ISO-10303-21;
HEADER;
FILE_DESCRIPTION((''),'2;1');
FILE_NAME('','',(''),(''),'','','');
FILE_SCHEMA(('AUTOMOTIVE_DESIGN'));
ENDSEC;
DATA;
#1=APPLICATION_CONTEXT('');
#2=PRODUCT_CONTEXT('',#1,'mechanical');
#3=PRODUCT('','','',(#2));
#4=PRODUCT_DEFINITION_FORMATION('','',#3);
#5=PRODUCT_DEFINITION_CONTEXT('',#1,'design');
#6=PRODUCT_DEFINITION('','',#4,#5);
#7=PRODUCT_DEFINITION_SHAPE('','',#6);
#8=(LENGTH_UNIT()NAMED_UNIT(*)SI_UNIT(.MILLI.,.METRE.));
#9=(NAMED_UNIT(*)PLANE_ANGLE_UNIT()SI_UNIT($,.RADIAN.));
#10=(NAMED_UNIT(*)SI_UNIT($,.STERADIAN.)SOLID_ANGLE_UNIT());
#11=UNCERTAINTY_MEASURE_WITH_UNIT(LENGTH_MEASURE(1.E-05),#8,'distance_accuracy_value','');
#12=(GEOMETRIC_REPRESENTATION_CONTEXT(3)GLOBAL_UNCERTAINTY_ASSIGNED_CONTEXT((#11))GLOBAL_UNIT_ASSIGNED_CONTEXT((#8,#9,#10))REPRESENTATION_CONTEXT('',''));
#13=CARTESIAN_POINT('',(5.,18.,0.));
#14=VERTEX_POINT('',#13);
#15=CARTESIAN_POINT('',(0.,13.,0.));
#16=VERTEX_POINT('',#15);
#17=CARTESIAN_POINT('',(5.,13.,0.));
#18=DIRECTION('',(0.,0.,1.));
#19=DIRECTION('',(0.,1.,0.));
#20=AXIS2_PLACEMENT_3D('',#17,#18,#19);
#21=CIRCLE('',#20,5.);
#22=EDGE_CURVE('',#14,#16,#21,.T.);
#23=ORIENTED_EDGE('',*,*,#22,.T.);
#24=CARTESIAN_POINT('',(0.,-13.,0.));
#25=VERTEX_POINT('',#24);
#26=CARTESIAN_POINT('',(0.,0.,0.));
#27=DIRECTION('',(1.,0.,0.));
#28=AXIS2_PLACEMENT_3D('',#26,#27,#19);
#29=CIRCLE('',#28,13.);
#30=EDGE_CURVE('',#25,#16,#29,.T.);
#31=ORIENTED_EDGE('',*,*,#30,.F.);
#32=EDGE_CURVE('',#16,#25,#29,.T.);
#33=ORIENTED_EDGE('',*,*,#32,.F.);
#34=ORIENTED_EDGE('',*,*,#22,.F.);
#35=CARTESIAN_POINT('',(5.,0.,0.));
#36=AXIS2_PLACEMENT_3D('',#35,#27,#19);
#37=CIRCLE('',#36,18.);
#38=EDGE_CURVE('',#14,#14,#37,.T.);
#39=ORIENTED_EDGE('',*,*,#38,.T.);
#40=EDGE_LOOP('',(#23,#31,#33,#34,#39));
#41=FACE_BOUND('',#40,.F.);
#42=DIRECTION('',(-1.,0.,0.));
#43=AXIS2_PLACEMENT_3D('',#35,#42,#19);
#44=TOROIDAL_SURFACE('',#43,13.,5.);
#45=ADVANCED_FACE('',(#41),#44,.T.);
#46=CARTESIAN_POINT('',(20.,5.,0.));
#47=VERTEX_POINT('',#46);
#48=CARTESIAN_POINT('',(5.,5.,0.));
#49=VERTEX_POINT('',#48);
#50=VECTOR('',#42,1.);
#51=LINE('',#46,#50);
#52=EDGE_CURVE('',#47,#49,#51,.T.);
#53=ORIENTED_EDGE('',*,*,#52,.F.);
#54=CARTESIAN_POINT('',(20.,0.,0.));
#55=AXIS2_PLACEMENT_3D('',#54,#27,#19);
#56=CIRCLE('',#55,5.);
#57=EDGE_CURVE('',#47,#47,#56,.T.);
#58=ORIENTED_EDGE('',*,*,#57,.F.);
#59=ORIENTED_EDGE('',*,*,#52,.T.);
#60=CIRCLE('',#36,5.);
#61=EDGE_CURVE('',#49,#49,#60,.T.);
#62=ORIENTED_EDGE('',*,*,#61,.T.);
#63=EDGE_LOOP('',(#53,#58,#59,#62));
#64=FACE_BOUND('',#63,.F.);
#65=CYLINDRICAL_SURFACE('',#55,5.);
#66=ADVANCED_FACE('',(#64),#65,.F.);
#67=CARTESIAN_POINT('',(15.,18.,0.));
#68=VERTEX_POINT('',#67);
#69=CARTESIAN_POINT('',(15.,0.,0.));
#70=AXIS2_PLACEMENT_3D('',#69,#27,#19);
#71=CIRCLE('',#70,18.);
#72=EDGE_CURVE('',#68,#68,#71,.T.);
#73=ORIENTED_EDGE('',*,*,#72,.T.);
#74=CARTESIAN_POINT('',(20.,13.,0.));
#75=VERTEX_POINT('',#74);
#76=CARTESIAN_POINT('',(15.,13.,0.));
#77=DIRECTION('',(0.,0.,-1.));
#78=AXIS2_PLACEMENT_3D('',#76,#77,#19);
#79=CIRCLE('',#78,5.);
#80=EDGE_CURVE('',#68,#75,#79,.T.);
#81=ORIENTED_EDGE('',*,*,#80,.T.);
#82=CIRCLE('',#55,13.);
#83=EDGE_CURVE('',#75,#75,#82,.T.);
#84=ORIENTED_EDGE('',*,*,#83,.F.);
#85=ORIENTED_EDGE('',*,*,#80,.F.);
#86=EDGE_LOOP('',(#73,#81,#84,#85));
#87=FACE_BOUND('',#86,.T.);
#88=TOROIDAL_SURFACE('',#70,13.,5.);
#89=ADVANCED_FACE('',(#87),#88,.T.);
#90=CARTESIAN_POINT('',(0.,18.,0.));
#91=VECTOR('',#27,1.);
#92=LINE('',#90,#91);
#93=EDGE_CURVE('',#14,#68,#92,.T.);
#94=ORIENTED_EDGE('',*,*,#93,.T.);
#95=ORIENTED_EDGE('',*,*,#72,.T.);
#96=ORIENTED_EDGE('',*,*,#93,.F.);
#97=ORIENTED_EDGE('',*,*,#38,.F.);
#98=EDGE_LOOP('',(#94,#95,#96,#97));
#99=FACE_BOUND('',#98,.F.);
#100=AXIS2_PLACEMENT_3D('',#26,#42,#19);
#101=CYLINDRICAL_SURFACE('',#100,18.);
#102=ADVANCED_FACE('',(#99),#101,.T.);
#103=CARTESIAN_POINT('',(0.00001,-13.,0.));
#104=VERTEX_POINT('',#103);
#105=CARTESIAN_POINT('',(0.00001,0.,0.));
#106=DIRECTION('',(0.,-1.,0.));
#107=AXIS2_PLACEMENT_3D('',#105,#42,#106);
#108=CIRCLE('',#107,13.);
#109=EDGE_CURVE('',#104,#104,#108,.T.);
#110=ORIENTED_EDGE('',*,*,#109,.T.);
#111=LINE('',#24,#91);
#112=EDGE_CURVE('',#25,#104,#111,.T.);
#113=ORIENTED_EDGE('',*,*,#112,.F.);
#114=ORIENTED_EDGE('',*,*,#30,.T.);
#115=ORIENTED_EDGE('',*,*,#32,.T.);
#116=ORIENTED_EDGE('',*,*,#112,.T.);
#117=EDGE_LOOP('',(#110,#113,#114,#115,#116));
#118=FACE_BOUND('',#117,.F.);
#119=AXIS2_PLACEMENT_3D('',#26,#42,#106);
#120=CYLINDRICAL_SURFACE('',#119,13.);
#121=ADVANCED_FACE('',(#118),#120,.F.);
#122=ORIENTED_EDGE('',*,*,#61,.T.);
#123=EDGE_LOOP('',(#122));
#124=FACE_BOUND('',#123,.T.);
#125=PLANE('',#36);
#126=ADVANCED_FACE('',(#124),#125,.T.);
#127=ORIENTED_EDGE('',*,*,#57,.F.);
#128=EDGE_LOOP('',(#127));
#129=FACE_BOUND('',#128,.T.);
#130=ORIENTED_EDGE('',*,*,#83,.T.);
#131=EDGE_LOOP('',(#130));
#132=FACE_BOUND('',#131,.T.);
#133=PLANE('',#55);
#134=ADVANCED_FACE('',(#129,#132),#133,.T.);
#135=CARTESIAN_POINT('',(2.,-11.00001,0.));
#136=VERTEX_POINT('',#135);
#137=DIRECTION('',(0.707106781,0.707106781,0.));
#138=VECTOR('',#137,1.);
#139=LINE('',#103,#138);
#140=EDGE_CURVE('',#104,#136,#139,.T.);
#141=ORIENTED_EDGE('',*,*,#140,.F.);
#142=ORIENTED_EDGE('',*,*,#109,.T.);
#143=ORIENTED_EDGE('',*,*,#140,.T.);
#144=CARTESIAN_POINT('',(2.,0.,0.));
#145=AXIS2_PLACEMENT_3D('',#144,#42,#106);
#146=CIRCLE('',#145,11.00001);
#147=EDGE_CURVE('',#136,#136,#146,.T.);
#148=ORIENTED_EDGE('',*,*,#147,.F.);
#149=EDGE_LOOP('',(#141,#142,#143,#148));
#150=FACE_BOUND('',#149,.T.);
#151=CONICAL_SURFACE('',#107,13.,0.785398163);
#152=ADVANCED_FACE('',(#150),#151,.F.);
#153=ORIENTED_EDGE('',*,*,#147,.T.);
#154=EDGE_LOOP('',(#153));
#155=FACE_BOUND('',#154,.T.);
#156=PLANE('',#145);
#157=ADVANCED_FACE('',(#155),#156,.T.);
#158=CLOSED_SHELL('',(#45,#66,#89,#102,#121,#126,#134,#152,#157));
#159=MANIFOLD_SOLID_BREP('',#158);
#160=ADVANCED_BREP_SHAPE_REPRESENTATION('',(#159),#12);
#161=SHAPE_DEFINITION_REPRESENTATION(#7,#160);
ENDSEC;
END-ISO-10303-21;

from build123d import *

# Parameters (mm, degrees)
F0_R     = 18
F1_DEPTH = 20
F2_R     = 5
F3_DEPTH = 15
F4_R     = 5
F5_R     = 13
F6_DEPTH = 2
F7_SIZE  = 1.99999


# Not quite as in the source:
# - a fillet or chamfer is up to 0.001 mm smaller than in the source, because OpenCascade refuses the exact size


with BuildPart() as f1:
    # F0 (on Right) → F1 (new body)
    with BuildSketch(Plane.YZ):
        Circle(F0_R)
    extrude(amount=F1_DEPTH)

    # F2 (on face) → F3 (cut)
    with BuildSketch(Plane.YZ.offset(20)):
        Circle(F2_R)
    extrude(amount=-F3_DEPTH, mode=Mode.SUBTRACT)

    # F4
    f4_edges = [f1.edges().sort_by_distance(p)[0] for p in [
        (0, -18, 0),
        (20, -18, 0),
    ]]
    fillet(f4_edges, radius=F4_R)

    # F5 (on face) → F6 (cut)
    with BuildSketch(Plane(origin=(0, 0, 0), x_dir=(0, -1, 0), z_dir=(-1, 0, 0))):
        Circle(F5_R)
    extrude(amount=-F6_DEPTH, mode=Mode.SUBTRACT)

    # F7 (size 2 in the source; OpenCascade refuses exactly that, so slightly less here)
    f7_edges = [f1.edges().sort_by_distance(p)[0] for p in [
        (2, 13, 0),
    ]]
    chamfer(f7_edges, length=F7_SIZE)


solid = f1.part
